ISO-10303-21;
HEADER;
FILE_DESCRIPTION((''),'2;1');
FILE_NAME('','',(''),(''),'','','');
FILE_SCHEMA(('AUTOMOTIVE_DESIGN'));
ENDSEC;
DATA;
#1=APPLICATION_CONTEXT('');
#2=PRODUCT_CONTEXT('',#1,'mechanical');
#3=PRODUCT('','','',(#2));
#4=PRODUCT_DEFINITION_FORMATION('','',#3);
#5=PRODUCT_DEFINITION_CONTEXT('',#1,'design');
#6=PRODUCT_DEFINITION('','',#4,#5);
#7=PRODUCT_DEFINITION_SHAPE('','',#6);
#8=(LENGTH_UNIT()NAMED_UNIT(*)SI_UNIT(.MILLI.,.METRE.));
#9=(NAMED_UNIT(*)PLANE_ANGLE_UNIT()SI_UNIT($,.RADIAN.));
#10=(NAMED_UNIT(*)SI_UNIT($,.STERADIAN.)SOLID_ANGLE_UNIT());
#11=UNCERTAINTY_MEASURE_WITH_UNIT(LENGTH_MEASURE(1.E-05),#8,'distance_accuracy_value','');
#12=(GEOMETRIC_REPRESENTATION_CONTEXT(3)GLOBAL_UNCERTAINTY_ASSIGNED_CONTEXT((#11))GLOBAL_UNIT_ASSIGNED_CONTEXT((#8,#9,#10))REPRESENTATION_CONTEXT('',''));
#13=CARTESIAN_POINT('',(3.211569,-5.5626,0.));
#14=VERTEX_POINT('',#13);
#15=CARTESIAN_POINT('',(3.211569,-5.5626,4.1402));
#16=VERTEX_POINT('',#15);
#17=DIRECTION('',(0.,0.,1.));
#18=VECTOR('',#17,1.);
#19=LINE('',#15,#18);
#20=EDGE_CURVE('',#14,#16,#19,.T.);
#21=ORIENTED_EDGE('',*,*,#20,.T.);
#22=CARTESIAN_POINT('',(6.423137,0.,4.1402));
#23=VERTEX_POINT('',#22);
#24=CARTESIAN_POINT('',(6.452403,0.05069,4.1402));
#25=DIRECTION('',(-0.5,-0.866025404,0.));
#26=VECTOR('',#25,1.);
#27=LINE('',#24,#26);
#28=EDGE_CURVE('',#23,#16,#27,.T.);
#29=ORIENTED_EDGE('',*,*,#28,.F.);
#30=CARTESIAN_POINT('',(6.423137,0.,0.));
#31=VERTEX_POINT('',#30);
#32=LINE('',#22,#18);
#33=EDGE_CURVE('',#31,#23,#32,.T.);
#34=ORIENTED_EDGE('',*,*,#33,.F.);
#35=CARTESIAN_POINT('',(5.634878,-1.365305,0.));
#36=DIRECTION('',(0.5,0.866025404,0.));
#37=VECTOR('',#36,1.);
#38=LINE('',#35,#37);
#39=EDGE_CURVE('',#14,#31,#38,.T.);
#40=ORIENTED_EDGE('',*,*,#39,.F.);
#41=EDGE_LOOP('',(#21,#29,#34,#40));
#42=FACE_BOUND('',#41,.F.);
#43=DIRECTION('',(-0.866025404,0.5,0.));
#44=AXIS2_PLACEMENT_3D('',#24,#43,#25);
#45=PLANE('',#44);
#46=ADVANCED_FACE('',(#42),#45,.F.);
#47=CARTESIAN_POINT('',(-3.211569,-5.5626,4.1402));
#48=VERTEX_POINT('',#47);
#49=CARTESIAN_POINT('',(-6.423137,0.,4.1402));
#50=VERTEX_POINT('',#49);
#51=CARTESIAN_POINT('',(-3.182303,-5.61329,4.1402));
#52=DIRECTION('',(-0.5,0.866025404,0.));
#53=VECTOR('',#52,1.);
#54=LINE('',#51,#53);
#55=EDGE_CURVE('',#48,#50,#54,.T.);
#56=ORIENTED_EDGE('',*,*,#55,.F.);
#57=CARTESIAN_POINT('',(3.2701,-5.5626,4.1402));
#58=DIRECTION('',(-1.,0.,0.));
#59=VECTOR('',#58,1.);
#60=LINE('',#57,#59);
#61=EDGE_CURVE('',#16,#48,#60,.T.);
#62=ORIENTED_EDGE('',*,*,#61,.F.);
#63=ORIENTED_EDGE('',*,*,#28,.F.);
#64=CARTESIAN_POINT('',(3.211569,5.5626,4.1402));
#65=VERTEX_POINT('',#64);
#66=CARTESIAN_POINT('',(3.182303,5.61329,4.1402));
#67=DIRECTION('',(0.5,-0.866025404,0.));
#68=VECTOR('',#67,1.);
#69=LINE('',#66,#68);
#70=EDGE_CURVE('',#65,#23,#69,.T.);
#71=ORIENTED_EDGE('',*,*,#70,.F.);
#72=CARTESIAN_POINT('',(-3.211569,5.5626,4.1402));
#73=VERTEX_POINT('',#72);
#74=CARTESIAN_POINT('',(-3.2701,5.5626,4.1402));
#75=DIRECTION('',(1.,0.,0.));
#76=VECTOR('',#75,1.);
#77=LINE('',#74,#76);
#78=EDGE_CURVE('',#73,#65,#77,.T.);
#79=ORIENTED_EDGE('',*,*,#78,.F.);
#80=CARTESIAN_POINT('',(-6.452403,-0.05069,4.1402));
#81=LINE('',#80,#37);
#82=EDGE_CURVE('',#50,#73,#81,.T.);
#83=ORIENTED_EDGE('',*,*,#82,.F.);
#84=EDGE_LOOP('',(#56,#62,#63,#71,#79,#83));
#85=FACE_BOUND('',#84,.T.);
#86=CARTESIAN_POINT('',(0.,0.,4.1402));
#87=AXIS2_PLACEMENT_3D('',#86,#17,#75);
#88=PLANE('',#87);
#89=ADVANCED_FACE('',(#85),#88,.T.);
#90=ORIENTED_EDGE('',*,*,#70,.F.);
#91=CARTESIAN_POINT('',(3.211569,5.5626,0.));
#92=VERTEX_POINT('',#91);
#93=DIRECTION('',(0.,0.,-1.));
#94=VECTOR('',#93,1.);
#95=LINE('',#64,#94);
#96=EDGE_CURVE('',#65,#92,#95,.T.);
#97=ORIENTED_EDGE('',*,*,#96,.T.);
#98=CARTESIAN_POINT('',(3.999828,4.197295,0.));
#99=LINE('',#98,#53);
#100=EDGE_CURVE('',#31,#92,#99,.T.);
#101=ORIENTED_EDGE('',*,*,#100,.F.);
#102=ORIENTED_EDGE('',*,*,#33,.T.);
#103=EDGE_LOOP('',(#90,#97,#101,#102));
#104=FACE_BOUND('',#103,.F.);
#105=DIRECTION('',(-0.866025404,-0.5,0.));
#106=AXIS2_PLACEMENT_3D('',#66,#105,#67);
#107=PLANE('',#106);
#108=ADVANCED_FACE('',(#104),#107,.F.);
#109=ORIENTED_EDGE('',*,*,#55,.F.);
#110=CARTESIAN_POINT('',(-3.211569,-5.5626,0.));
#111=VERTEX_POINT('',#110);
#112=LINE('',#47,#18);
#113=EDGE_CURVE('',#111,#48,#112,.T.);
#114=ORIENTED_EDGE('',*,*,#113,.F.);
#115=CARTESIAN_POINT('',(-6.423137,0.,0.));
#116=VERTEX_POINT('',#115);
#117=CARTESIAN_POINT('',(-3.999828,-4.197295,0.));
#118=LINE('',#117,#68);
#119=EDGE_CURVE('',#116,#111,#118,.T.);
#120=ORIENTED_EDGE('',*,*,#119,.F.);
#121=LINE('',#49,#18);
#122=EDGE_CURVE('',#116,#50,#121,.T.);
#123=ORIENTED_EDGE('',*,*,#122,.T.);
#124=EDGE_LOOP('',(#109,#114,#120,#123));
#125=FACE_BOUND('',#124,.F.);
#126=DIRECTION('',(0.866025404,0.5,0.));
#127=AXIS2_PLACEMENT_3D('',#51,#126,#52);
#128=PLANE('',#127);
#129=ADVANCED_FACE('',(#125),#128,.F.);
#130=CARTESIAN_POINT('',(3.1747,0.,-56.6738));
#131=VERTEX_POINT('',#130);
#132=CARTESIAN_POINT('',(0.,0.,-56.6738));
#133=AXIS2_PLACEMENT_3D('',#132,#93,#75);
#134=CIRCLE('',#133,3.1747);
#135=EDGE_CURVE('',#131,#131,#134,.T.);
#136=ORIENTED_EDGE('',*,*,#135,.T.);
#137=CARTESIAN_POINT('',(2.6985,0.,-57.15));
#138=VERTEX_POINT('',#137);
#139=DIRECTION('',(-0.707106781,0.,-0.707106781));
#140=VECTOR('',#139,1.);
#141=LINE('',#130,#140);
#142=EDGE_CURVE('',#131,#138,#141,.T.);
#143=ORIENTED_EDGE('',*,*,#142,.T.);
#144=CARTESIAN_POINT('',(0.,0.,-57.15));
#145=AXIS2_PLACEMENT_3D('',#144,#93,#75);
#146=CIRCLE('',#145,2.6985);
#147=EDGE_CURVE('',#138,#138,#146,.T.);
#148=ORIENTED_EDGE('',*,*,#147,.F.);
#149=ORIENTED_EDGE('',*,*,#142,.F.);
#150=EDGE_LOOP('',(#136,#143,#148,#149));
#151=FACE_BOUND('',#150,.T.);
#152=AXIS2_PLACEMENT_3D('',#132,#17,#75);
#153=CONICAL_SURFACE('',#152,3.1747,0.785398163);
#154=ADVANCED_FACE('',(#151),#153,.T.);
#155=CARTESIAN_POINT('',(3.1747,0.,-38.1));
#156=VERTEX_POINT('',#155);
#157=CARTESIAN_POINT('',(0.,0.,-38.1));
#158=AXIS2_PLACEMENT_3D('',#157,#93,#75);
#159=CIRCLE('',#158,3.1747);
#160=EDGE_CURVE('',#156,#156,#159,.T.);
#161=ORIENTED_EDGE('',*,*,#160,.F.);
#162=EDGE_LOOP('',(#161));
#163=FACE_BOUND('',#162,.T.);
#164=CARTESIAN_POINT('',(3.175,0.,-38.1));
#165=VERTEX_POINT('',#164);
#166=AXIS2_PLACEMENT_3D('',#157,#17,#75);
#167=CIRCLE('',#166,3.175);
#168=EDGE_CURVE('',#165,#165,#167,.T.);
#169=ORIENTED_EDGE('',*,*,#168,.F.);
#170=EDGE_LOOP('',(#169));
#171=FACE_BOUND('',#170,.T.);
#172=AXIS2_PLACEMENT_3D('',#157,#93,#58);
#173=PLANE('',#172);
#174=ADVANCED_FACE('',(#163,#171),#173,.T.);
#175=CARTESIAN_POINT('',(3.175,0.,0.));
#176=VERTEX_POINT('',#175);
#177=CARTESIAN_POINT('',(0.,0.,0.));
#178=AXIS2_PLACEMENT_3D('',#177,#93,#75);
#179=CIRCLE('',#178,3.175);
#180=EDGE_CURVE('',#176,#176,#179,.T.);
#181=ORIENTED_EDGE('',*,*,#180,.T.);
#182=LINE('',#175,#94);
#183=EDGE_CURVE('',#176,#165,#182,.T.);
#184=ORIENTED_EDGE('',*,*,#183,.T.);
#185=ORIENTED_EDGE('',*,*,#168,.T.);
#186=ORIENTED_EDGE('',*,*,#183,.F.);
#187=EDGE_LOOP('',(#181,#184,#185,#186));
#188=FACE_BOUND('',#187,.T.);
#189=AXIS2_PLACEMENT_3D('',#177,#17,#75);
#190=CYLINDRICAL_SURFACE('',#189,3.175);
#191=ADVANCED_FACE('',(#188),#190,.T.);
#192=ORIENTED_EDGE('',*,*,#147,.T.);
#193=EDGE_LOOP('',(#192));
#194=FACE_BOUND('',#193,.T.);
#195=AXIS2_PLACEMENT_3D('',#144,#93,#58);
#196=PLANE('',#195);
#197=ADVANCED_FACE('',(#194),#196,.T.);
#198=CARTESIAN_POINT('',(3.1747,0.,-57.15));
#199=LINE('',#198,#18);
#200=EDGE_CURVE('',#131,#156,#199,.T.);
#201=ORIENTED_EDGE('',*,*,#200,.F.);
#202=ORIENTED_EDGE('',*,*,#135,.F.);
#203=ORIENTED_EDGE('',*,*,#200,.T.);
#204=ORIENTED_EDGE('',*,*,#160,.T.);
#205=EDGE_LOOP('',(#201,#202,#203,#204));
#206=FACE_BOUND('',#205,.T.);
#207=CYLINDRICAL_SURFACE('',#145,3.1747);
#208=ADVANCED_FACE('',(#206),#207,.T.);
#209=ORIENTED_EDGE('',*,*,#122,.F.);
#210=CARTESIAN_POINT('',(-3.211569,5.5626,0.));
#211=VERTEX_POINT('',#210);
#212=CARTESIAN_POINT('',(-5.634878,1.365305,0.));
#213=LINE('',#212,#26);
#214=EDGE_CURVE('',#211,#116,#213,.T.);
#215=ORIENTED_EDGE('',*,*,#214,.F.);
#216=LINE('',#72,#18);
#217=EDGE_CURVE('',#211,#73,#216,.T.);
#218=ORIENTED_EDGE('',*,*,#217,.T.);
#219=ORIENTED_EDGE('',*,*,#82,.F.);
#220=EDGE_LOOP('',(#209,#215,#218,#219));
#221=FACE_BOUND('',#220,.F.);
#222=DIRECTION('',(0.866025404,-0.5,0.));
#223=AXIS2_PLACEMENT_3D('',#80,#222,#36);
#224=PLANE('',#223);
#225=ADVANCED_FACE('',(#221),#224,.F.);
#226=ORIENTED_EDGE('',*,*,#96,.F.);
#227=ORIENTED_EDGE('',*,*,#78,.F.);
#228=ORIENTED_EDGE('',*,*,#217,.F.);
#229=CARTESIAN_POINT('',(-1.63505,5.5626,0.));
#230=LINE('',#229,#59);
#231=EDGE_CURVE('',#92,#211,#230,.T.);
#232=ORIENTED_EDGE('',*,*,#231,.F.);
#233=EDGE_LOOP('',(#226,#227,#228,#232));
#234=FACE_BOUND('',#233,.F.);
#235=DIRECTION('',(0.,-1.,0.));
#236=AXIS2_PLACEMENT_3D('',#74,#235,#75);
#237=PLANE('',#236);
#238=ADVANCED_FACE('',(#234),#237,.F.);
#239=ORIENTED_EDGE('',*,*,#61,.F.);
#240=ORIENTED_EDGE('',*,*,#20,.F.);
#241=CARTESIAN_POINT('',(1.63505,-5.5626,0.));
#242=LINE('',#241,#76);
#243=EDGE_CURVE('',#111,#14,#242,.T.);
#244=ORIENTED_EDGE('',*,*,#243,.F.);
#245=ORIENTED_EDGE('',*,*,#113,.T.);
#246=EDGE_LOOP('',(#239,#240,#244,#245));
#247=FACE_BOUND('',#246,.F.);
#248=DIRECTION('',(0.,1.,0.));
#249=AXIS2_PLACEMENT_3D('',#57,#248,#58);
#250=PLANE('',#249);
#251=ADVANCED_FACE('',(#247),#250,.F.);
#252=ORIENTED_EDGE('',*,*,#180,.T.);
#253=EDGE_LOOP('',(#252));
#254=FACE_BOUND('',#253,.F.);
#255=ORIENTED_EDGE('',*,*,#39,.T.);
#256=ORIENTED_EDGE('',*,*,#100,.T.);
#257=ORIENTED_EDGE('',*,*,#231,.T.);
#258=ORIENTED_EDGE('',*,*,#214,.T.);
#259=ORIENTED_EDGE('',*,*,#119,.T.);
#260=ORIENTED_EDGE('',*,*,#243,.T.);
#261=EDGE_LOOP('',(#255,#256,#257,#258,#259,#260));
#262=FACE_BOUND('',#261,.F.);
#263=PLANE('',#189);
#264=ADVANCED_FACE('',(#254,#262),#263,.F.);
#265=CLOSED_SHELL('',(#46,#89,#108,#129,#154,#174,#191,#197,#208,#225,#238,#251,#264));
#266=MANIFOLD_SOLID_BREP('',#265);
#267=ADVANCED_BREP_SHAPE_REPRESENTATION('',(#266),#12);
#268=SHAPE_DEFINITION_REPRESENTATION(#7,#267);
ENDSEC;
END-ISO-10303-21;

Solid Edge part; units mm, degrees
sketch "Sketch1" plane through (0, 0, 0) normal (0, 0, 1) x (1, 0, 0)
  circle A0 centre (0, 0) radius 6.4526
  dimension "D1" = 12.9052
extrude "Protrusion1" add sketch "Sketch1" along normal blind 4.1402
sketch "Sketch2" plane through (0, 0, 0) normal (0, 0, -1) x (1, 0, 0)
  circle A0 centre (0, 0) radius 3.175
extrude "Protrusion2" add sketch "Sketch2" along normal blind 57.15
sketch "Sketch3" plane through (0, 0, -57.15) normal (0, 0, -1) x (1, 0, 0)
  circle A0 centre (0, 0) radius 3.1747
extrude "Cutout1" cut sketch "Sketch3" against normal blind 19.05 flip side to cut
chamfer "Chamfer_1" distance 0.4762 angle 45 1 edges at (-3.1747, 0, -57.15)
sketch "Sketch4" plane through (0, 0, 4.1402) normal (0, 0, 1) x (1, 0, 0)
  line L0 (-3.2701, 5.5626) -> (3.2701, 5.5626)
  dimension "D1" = 11.1252
extrude "Cutout2" cut sketch "Sketch4" against normal up to next material side at (0, 5.6126, 4.1402)
pattern_circular "Pattern1" count 6 over 360 about axis through (0, 0, 4.1402) along (0, 0, 1) of "Cutout2"
properties part number "117589"
